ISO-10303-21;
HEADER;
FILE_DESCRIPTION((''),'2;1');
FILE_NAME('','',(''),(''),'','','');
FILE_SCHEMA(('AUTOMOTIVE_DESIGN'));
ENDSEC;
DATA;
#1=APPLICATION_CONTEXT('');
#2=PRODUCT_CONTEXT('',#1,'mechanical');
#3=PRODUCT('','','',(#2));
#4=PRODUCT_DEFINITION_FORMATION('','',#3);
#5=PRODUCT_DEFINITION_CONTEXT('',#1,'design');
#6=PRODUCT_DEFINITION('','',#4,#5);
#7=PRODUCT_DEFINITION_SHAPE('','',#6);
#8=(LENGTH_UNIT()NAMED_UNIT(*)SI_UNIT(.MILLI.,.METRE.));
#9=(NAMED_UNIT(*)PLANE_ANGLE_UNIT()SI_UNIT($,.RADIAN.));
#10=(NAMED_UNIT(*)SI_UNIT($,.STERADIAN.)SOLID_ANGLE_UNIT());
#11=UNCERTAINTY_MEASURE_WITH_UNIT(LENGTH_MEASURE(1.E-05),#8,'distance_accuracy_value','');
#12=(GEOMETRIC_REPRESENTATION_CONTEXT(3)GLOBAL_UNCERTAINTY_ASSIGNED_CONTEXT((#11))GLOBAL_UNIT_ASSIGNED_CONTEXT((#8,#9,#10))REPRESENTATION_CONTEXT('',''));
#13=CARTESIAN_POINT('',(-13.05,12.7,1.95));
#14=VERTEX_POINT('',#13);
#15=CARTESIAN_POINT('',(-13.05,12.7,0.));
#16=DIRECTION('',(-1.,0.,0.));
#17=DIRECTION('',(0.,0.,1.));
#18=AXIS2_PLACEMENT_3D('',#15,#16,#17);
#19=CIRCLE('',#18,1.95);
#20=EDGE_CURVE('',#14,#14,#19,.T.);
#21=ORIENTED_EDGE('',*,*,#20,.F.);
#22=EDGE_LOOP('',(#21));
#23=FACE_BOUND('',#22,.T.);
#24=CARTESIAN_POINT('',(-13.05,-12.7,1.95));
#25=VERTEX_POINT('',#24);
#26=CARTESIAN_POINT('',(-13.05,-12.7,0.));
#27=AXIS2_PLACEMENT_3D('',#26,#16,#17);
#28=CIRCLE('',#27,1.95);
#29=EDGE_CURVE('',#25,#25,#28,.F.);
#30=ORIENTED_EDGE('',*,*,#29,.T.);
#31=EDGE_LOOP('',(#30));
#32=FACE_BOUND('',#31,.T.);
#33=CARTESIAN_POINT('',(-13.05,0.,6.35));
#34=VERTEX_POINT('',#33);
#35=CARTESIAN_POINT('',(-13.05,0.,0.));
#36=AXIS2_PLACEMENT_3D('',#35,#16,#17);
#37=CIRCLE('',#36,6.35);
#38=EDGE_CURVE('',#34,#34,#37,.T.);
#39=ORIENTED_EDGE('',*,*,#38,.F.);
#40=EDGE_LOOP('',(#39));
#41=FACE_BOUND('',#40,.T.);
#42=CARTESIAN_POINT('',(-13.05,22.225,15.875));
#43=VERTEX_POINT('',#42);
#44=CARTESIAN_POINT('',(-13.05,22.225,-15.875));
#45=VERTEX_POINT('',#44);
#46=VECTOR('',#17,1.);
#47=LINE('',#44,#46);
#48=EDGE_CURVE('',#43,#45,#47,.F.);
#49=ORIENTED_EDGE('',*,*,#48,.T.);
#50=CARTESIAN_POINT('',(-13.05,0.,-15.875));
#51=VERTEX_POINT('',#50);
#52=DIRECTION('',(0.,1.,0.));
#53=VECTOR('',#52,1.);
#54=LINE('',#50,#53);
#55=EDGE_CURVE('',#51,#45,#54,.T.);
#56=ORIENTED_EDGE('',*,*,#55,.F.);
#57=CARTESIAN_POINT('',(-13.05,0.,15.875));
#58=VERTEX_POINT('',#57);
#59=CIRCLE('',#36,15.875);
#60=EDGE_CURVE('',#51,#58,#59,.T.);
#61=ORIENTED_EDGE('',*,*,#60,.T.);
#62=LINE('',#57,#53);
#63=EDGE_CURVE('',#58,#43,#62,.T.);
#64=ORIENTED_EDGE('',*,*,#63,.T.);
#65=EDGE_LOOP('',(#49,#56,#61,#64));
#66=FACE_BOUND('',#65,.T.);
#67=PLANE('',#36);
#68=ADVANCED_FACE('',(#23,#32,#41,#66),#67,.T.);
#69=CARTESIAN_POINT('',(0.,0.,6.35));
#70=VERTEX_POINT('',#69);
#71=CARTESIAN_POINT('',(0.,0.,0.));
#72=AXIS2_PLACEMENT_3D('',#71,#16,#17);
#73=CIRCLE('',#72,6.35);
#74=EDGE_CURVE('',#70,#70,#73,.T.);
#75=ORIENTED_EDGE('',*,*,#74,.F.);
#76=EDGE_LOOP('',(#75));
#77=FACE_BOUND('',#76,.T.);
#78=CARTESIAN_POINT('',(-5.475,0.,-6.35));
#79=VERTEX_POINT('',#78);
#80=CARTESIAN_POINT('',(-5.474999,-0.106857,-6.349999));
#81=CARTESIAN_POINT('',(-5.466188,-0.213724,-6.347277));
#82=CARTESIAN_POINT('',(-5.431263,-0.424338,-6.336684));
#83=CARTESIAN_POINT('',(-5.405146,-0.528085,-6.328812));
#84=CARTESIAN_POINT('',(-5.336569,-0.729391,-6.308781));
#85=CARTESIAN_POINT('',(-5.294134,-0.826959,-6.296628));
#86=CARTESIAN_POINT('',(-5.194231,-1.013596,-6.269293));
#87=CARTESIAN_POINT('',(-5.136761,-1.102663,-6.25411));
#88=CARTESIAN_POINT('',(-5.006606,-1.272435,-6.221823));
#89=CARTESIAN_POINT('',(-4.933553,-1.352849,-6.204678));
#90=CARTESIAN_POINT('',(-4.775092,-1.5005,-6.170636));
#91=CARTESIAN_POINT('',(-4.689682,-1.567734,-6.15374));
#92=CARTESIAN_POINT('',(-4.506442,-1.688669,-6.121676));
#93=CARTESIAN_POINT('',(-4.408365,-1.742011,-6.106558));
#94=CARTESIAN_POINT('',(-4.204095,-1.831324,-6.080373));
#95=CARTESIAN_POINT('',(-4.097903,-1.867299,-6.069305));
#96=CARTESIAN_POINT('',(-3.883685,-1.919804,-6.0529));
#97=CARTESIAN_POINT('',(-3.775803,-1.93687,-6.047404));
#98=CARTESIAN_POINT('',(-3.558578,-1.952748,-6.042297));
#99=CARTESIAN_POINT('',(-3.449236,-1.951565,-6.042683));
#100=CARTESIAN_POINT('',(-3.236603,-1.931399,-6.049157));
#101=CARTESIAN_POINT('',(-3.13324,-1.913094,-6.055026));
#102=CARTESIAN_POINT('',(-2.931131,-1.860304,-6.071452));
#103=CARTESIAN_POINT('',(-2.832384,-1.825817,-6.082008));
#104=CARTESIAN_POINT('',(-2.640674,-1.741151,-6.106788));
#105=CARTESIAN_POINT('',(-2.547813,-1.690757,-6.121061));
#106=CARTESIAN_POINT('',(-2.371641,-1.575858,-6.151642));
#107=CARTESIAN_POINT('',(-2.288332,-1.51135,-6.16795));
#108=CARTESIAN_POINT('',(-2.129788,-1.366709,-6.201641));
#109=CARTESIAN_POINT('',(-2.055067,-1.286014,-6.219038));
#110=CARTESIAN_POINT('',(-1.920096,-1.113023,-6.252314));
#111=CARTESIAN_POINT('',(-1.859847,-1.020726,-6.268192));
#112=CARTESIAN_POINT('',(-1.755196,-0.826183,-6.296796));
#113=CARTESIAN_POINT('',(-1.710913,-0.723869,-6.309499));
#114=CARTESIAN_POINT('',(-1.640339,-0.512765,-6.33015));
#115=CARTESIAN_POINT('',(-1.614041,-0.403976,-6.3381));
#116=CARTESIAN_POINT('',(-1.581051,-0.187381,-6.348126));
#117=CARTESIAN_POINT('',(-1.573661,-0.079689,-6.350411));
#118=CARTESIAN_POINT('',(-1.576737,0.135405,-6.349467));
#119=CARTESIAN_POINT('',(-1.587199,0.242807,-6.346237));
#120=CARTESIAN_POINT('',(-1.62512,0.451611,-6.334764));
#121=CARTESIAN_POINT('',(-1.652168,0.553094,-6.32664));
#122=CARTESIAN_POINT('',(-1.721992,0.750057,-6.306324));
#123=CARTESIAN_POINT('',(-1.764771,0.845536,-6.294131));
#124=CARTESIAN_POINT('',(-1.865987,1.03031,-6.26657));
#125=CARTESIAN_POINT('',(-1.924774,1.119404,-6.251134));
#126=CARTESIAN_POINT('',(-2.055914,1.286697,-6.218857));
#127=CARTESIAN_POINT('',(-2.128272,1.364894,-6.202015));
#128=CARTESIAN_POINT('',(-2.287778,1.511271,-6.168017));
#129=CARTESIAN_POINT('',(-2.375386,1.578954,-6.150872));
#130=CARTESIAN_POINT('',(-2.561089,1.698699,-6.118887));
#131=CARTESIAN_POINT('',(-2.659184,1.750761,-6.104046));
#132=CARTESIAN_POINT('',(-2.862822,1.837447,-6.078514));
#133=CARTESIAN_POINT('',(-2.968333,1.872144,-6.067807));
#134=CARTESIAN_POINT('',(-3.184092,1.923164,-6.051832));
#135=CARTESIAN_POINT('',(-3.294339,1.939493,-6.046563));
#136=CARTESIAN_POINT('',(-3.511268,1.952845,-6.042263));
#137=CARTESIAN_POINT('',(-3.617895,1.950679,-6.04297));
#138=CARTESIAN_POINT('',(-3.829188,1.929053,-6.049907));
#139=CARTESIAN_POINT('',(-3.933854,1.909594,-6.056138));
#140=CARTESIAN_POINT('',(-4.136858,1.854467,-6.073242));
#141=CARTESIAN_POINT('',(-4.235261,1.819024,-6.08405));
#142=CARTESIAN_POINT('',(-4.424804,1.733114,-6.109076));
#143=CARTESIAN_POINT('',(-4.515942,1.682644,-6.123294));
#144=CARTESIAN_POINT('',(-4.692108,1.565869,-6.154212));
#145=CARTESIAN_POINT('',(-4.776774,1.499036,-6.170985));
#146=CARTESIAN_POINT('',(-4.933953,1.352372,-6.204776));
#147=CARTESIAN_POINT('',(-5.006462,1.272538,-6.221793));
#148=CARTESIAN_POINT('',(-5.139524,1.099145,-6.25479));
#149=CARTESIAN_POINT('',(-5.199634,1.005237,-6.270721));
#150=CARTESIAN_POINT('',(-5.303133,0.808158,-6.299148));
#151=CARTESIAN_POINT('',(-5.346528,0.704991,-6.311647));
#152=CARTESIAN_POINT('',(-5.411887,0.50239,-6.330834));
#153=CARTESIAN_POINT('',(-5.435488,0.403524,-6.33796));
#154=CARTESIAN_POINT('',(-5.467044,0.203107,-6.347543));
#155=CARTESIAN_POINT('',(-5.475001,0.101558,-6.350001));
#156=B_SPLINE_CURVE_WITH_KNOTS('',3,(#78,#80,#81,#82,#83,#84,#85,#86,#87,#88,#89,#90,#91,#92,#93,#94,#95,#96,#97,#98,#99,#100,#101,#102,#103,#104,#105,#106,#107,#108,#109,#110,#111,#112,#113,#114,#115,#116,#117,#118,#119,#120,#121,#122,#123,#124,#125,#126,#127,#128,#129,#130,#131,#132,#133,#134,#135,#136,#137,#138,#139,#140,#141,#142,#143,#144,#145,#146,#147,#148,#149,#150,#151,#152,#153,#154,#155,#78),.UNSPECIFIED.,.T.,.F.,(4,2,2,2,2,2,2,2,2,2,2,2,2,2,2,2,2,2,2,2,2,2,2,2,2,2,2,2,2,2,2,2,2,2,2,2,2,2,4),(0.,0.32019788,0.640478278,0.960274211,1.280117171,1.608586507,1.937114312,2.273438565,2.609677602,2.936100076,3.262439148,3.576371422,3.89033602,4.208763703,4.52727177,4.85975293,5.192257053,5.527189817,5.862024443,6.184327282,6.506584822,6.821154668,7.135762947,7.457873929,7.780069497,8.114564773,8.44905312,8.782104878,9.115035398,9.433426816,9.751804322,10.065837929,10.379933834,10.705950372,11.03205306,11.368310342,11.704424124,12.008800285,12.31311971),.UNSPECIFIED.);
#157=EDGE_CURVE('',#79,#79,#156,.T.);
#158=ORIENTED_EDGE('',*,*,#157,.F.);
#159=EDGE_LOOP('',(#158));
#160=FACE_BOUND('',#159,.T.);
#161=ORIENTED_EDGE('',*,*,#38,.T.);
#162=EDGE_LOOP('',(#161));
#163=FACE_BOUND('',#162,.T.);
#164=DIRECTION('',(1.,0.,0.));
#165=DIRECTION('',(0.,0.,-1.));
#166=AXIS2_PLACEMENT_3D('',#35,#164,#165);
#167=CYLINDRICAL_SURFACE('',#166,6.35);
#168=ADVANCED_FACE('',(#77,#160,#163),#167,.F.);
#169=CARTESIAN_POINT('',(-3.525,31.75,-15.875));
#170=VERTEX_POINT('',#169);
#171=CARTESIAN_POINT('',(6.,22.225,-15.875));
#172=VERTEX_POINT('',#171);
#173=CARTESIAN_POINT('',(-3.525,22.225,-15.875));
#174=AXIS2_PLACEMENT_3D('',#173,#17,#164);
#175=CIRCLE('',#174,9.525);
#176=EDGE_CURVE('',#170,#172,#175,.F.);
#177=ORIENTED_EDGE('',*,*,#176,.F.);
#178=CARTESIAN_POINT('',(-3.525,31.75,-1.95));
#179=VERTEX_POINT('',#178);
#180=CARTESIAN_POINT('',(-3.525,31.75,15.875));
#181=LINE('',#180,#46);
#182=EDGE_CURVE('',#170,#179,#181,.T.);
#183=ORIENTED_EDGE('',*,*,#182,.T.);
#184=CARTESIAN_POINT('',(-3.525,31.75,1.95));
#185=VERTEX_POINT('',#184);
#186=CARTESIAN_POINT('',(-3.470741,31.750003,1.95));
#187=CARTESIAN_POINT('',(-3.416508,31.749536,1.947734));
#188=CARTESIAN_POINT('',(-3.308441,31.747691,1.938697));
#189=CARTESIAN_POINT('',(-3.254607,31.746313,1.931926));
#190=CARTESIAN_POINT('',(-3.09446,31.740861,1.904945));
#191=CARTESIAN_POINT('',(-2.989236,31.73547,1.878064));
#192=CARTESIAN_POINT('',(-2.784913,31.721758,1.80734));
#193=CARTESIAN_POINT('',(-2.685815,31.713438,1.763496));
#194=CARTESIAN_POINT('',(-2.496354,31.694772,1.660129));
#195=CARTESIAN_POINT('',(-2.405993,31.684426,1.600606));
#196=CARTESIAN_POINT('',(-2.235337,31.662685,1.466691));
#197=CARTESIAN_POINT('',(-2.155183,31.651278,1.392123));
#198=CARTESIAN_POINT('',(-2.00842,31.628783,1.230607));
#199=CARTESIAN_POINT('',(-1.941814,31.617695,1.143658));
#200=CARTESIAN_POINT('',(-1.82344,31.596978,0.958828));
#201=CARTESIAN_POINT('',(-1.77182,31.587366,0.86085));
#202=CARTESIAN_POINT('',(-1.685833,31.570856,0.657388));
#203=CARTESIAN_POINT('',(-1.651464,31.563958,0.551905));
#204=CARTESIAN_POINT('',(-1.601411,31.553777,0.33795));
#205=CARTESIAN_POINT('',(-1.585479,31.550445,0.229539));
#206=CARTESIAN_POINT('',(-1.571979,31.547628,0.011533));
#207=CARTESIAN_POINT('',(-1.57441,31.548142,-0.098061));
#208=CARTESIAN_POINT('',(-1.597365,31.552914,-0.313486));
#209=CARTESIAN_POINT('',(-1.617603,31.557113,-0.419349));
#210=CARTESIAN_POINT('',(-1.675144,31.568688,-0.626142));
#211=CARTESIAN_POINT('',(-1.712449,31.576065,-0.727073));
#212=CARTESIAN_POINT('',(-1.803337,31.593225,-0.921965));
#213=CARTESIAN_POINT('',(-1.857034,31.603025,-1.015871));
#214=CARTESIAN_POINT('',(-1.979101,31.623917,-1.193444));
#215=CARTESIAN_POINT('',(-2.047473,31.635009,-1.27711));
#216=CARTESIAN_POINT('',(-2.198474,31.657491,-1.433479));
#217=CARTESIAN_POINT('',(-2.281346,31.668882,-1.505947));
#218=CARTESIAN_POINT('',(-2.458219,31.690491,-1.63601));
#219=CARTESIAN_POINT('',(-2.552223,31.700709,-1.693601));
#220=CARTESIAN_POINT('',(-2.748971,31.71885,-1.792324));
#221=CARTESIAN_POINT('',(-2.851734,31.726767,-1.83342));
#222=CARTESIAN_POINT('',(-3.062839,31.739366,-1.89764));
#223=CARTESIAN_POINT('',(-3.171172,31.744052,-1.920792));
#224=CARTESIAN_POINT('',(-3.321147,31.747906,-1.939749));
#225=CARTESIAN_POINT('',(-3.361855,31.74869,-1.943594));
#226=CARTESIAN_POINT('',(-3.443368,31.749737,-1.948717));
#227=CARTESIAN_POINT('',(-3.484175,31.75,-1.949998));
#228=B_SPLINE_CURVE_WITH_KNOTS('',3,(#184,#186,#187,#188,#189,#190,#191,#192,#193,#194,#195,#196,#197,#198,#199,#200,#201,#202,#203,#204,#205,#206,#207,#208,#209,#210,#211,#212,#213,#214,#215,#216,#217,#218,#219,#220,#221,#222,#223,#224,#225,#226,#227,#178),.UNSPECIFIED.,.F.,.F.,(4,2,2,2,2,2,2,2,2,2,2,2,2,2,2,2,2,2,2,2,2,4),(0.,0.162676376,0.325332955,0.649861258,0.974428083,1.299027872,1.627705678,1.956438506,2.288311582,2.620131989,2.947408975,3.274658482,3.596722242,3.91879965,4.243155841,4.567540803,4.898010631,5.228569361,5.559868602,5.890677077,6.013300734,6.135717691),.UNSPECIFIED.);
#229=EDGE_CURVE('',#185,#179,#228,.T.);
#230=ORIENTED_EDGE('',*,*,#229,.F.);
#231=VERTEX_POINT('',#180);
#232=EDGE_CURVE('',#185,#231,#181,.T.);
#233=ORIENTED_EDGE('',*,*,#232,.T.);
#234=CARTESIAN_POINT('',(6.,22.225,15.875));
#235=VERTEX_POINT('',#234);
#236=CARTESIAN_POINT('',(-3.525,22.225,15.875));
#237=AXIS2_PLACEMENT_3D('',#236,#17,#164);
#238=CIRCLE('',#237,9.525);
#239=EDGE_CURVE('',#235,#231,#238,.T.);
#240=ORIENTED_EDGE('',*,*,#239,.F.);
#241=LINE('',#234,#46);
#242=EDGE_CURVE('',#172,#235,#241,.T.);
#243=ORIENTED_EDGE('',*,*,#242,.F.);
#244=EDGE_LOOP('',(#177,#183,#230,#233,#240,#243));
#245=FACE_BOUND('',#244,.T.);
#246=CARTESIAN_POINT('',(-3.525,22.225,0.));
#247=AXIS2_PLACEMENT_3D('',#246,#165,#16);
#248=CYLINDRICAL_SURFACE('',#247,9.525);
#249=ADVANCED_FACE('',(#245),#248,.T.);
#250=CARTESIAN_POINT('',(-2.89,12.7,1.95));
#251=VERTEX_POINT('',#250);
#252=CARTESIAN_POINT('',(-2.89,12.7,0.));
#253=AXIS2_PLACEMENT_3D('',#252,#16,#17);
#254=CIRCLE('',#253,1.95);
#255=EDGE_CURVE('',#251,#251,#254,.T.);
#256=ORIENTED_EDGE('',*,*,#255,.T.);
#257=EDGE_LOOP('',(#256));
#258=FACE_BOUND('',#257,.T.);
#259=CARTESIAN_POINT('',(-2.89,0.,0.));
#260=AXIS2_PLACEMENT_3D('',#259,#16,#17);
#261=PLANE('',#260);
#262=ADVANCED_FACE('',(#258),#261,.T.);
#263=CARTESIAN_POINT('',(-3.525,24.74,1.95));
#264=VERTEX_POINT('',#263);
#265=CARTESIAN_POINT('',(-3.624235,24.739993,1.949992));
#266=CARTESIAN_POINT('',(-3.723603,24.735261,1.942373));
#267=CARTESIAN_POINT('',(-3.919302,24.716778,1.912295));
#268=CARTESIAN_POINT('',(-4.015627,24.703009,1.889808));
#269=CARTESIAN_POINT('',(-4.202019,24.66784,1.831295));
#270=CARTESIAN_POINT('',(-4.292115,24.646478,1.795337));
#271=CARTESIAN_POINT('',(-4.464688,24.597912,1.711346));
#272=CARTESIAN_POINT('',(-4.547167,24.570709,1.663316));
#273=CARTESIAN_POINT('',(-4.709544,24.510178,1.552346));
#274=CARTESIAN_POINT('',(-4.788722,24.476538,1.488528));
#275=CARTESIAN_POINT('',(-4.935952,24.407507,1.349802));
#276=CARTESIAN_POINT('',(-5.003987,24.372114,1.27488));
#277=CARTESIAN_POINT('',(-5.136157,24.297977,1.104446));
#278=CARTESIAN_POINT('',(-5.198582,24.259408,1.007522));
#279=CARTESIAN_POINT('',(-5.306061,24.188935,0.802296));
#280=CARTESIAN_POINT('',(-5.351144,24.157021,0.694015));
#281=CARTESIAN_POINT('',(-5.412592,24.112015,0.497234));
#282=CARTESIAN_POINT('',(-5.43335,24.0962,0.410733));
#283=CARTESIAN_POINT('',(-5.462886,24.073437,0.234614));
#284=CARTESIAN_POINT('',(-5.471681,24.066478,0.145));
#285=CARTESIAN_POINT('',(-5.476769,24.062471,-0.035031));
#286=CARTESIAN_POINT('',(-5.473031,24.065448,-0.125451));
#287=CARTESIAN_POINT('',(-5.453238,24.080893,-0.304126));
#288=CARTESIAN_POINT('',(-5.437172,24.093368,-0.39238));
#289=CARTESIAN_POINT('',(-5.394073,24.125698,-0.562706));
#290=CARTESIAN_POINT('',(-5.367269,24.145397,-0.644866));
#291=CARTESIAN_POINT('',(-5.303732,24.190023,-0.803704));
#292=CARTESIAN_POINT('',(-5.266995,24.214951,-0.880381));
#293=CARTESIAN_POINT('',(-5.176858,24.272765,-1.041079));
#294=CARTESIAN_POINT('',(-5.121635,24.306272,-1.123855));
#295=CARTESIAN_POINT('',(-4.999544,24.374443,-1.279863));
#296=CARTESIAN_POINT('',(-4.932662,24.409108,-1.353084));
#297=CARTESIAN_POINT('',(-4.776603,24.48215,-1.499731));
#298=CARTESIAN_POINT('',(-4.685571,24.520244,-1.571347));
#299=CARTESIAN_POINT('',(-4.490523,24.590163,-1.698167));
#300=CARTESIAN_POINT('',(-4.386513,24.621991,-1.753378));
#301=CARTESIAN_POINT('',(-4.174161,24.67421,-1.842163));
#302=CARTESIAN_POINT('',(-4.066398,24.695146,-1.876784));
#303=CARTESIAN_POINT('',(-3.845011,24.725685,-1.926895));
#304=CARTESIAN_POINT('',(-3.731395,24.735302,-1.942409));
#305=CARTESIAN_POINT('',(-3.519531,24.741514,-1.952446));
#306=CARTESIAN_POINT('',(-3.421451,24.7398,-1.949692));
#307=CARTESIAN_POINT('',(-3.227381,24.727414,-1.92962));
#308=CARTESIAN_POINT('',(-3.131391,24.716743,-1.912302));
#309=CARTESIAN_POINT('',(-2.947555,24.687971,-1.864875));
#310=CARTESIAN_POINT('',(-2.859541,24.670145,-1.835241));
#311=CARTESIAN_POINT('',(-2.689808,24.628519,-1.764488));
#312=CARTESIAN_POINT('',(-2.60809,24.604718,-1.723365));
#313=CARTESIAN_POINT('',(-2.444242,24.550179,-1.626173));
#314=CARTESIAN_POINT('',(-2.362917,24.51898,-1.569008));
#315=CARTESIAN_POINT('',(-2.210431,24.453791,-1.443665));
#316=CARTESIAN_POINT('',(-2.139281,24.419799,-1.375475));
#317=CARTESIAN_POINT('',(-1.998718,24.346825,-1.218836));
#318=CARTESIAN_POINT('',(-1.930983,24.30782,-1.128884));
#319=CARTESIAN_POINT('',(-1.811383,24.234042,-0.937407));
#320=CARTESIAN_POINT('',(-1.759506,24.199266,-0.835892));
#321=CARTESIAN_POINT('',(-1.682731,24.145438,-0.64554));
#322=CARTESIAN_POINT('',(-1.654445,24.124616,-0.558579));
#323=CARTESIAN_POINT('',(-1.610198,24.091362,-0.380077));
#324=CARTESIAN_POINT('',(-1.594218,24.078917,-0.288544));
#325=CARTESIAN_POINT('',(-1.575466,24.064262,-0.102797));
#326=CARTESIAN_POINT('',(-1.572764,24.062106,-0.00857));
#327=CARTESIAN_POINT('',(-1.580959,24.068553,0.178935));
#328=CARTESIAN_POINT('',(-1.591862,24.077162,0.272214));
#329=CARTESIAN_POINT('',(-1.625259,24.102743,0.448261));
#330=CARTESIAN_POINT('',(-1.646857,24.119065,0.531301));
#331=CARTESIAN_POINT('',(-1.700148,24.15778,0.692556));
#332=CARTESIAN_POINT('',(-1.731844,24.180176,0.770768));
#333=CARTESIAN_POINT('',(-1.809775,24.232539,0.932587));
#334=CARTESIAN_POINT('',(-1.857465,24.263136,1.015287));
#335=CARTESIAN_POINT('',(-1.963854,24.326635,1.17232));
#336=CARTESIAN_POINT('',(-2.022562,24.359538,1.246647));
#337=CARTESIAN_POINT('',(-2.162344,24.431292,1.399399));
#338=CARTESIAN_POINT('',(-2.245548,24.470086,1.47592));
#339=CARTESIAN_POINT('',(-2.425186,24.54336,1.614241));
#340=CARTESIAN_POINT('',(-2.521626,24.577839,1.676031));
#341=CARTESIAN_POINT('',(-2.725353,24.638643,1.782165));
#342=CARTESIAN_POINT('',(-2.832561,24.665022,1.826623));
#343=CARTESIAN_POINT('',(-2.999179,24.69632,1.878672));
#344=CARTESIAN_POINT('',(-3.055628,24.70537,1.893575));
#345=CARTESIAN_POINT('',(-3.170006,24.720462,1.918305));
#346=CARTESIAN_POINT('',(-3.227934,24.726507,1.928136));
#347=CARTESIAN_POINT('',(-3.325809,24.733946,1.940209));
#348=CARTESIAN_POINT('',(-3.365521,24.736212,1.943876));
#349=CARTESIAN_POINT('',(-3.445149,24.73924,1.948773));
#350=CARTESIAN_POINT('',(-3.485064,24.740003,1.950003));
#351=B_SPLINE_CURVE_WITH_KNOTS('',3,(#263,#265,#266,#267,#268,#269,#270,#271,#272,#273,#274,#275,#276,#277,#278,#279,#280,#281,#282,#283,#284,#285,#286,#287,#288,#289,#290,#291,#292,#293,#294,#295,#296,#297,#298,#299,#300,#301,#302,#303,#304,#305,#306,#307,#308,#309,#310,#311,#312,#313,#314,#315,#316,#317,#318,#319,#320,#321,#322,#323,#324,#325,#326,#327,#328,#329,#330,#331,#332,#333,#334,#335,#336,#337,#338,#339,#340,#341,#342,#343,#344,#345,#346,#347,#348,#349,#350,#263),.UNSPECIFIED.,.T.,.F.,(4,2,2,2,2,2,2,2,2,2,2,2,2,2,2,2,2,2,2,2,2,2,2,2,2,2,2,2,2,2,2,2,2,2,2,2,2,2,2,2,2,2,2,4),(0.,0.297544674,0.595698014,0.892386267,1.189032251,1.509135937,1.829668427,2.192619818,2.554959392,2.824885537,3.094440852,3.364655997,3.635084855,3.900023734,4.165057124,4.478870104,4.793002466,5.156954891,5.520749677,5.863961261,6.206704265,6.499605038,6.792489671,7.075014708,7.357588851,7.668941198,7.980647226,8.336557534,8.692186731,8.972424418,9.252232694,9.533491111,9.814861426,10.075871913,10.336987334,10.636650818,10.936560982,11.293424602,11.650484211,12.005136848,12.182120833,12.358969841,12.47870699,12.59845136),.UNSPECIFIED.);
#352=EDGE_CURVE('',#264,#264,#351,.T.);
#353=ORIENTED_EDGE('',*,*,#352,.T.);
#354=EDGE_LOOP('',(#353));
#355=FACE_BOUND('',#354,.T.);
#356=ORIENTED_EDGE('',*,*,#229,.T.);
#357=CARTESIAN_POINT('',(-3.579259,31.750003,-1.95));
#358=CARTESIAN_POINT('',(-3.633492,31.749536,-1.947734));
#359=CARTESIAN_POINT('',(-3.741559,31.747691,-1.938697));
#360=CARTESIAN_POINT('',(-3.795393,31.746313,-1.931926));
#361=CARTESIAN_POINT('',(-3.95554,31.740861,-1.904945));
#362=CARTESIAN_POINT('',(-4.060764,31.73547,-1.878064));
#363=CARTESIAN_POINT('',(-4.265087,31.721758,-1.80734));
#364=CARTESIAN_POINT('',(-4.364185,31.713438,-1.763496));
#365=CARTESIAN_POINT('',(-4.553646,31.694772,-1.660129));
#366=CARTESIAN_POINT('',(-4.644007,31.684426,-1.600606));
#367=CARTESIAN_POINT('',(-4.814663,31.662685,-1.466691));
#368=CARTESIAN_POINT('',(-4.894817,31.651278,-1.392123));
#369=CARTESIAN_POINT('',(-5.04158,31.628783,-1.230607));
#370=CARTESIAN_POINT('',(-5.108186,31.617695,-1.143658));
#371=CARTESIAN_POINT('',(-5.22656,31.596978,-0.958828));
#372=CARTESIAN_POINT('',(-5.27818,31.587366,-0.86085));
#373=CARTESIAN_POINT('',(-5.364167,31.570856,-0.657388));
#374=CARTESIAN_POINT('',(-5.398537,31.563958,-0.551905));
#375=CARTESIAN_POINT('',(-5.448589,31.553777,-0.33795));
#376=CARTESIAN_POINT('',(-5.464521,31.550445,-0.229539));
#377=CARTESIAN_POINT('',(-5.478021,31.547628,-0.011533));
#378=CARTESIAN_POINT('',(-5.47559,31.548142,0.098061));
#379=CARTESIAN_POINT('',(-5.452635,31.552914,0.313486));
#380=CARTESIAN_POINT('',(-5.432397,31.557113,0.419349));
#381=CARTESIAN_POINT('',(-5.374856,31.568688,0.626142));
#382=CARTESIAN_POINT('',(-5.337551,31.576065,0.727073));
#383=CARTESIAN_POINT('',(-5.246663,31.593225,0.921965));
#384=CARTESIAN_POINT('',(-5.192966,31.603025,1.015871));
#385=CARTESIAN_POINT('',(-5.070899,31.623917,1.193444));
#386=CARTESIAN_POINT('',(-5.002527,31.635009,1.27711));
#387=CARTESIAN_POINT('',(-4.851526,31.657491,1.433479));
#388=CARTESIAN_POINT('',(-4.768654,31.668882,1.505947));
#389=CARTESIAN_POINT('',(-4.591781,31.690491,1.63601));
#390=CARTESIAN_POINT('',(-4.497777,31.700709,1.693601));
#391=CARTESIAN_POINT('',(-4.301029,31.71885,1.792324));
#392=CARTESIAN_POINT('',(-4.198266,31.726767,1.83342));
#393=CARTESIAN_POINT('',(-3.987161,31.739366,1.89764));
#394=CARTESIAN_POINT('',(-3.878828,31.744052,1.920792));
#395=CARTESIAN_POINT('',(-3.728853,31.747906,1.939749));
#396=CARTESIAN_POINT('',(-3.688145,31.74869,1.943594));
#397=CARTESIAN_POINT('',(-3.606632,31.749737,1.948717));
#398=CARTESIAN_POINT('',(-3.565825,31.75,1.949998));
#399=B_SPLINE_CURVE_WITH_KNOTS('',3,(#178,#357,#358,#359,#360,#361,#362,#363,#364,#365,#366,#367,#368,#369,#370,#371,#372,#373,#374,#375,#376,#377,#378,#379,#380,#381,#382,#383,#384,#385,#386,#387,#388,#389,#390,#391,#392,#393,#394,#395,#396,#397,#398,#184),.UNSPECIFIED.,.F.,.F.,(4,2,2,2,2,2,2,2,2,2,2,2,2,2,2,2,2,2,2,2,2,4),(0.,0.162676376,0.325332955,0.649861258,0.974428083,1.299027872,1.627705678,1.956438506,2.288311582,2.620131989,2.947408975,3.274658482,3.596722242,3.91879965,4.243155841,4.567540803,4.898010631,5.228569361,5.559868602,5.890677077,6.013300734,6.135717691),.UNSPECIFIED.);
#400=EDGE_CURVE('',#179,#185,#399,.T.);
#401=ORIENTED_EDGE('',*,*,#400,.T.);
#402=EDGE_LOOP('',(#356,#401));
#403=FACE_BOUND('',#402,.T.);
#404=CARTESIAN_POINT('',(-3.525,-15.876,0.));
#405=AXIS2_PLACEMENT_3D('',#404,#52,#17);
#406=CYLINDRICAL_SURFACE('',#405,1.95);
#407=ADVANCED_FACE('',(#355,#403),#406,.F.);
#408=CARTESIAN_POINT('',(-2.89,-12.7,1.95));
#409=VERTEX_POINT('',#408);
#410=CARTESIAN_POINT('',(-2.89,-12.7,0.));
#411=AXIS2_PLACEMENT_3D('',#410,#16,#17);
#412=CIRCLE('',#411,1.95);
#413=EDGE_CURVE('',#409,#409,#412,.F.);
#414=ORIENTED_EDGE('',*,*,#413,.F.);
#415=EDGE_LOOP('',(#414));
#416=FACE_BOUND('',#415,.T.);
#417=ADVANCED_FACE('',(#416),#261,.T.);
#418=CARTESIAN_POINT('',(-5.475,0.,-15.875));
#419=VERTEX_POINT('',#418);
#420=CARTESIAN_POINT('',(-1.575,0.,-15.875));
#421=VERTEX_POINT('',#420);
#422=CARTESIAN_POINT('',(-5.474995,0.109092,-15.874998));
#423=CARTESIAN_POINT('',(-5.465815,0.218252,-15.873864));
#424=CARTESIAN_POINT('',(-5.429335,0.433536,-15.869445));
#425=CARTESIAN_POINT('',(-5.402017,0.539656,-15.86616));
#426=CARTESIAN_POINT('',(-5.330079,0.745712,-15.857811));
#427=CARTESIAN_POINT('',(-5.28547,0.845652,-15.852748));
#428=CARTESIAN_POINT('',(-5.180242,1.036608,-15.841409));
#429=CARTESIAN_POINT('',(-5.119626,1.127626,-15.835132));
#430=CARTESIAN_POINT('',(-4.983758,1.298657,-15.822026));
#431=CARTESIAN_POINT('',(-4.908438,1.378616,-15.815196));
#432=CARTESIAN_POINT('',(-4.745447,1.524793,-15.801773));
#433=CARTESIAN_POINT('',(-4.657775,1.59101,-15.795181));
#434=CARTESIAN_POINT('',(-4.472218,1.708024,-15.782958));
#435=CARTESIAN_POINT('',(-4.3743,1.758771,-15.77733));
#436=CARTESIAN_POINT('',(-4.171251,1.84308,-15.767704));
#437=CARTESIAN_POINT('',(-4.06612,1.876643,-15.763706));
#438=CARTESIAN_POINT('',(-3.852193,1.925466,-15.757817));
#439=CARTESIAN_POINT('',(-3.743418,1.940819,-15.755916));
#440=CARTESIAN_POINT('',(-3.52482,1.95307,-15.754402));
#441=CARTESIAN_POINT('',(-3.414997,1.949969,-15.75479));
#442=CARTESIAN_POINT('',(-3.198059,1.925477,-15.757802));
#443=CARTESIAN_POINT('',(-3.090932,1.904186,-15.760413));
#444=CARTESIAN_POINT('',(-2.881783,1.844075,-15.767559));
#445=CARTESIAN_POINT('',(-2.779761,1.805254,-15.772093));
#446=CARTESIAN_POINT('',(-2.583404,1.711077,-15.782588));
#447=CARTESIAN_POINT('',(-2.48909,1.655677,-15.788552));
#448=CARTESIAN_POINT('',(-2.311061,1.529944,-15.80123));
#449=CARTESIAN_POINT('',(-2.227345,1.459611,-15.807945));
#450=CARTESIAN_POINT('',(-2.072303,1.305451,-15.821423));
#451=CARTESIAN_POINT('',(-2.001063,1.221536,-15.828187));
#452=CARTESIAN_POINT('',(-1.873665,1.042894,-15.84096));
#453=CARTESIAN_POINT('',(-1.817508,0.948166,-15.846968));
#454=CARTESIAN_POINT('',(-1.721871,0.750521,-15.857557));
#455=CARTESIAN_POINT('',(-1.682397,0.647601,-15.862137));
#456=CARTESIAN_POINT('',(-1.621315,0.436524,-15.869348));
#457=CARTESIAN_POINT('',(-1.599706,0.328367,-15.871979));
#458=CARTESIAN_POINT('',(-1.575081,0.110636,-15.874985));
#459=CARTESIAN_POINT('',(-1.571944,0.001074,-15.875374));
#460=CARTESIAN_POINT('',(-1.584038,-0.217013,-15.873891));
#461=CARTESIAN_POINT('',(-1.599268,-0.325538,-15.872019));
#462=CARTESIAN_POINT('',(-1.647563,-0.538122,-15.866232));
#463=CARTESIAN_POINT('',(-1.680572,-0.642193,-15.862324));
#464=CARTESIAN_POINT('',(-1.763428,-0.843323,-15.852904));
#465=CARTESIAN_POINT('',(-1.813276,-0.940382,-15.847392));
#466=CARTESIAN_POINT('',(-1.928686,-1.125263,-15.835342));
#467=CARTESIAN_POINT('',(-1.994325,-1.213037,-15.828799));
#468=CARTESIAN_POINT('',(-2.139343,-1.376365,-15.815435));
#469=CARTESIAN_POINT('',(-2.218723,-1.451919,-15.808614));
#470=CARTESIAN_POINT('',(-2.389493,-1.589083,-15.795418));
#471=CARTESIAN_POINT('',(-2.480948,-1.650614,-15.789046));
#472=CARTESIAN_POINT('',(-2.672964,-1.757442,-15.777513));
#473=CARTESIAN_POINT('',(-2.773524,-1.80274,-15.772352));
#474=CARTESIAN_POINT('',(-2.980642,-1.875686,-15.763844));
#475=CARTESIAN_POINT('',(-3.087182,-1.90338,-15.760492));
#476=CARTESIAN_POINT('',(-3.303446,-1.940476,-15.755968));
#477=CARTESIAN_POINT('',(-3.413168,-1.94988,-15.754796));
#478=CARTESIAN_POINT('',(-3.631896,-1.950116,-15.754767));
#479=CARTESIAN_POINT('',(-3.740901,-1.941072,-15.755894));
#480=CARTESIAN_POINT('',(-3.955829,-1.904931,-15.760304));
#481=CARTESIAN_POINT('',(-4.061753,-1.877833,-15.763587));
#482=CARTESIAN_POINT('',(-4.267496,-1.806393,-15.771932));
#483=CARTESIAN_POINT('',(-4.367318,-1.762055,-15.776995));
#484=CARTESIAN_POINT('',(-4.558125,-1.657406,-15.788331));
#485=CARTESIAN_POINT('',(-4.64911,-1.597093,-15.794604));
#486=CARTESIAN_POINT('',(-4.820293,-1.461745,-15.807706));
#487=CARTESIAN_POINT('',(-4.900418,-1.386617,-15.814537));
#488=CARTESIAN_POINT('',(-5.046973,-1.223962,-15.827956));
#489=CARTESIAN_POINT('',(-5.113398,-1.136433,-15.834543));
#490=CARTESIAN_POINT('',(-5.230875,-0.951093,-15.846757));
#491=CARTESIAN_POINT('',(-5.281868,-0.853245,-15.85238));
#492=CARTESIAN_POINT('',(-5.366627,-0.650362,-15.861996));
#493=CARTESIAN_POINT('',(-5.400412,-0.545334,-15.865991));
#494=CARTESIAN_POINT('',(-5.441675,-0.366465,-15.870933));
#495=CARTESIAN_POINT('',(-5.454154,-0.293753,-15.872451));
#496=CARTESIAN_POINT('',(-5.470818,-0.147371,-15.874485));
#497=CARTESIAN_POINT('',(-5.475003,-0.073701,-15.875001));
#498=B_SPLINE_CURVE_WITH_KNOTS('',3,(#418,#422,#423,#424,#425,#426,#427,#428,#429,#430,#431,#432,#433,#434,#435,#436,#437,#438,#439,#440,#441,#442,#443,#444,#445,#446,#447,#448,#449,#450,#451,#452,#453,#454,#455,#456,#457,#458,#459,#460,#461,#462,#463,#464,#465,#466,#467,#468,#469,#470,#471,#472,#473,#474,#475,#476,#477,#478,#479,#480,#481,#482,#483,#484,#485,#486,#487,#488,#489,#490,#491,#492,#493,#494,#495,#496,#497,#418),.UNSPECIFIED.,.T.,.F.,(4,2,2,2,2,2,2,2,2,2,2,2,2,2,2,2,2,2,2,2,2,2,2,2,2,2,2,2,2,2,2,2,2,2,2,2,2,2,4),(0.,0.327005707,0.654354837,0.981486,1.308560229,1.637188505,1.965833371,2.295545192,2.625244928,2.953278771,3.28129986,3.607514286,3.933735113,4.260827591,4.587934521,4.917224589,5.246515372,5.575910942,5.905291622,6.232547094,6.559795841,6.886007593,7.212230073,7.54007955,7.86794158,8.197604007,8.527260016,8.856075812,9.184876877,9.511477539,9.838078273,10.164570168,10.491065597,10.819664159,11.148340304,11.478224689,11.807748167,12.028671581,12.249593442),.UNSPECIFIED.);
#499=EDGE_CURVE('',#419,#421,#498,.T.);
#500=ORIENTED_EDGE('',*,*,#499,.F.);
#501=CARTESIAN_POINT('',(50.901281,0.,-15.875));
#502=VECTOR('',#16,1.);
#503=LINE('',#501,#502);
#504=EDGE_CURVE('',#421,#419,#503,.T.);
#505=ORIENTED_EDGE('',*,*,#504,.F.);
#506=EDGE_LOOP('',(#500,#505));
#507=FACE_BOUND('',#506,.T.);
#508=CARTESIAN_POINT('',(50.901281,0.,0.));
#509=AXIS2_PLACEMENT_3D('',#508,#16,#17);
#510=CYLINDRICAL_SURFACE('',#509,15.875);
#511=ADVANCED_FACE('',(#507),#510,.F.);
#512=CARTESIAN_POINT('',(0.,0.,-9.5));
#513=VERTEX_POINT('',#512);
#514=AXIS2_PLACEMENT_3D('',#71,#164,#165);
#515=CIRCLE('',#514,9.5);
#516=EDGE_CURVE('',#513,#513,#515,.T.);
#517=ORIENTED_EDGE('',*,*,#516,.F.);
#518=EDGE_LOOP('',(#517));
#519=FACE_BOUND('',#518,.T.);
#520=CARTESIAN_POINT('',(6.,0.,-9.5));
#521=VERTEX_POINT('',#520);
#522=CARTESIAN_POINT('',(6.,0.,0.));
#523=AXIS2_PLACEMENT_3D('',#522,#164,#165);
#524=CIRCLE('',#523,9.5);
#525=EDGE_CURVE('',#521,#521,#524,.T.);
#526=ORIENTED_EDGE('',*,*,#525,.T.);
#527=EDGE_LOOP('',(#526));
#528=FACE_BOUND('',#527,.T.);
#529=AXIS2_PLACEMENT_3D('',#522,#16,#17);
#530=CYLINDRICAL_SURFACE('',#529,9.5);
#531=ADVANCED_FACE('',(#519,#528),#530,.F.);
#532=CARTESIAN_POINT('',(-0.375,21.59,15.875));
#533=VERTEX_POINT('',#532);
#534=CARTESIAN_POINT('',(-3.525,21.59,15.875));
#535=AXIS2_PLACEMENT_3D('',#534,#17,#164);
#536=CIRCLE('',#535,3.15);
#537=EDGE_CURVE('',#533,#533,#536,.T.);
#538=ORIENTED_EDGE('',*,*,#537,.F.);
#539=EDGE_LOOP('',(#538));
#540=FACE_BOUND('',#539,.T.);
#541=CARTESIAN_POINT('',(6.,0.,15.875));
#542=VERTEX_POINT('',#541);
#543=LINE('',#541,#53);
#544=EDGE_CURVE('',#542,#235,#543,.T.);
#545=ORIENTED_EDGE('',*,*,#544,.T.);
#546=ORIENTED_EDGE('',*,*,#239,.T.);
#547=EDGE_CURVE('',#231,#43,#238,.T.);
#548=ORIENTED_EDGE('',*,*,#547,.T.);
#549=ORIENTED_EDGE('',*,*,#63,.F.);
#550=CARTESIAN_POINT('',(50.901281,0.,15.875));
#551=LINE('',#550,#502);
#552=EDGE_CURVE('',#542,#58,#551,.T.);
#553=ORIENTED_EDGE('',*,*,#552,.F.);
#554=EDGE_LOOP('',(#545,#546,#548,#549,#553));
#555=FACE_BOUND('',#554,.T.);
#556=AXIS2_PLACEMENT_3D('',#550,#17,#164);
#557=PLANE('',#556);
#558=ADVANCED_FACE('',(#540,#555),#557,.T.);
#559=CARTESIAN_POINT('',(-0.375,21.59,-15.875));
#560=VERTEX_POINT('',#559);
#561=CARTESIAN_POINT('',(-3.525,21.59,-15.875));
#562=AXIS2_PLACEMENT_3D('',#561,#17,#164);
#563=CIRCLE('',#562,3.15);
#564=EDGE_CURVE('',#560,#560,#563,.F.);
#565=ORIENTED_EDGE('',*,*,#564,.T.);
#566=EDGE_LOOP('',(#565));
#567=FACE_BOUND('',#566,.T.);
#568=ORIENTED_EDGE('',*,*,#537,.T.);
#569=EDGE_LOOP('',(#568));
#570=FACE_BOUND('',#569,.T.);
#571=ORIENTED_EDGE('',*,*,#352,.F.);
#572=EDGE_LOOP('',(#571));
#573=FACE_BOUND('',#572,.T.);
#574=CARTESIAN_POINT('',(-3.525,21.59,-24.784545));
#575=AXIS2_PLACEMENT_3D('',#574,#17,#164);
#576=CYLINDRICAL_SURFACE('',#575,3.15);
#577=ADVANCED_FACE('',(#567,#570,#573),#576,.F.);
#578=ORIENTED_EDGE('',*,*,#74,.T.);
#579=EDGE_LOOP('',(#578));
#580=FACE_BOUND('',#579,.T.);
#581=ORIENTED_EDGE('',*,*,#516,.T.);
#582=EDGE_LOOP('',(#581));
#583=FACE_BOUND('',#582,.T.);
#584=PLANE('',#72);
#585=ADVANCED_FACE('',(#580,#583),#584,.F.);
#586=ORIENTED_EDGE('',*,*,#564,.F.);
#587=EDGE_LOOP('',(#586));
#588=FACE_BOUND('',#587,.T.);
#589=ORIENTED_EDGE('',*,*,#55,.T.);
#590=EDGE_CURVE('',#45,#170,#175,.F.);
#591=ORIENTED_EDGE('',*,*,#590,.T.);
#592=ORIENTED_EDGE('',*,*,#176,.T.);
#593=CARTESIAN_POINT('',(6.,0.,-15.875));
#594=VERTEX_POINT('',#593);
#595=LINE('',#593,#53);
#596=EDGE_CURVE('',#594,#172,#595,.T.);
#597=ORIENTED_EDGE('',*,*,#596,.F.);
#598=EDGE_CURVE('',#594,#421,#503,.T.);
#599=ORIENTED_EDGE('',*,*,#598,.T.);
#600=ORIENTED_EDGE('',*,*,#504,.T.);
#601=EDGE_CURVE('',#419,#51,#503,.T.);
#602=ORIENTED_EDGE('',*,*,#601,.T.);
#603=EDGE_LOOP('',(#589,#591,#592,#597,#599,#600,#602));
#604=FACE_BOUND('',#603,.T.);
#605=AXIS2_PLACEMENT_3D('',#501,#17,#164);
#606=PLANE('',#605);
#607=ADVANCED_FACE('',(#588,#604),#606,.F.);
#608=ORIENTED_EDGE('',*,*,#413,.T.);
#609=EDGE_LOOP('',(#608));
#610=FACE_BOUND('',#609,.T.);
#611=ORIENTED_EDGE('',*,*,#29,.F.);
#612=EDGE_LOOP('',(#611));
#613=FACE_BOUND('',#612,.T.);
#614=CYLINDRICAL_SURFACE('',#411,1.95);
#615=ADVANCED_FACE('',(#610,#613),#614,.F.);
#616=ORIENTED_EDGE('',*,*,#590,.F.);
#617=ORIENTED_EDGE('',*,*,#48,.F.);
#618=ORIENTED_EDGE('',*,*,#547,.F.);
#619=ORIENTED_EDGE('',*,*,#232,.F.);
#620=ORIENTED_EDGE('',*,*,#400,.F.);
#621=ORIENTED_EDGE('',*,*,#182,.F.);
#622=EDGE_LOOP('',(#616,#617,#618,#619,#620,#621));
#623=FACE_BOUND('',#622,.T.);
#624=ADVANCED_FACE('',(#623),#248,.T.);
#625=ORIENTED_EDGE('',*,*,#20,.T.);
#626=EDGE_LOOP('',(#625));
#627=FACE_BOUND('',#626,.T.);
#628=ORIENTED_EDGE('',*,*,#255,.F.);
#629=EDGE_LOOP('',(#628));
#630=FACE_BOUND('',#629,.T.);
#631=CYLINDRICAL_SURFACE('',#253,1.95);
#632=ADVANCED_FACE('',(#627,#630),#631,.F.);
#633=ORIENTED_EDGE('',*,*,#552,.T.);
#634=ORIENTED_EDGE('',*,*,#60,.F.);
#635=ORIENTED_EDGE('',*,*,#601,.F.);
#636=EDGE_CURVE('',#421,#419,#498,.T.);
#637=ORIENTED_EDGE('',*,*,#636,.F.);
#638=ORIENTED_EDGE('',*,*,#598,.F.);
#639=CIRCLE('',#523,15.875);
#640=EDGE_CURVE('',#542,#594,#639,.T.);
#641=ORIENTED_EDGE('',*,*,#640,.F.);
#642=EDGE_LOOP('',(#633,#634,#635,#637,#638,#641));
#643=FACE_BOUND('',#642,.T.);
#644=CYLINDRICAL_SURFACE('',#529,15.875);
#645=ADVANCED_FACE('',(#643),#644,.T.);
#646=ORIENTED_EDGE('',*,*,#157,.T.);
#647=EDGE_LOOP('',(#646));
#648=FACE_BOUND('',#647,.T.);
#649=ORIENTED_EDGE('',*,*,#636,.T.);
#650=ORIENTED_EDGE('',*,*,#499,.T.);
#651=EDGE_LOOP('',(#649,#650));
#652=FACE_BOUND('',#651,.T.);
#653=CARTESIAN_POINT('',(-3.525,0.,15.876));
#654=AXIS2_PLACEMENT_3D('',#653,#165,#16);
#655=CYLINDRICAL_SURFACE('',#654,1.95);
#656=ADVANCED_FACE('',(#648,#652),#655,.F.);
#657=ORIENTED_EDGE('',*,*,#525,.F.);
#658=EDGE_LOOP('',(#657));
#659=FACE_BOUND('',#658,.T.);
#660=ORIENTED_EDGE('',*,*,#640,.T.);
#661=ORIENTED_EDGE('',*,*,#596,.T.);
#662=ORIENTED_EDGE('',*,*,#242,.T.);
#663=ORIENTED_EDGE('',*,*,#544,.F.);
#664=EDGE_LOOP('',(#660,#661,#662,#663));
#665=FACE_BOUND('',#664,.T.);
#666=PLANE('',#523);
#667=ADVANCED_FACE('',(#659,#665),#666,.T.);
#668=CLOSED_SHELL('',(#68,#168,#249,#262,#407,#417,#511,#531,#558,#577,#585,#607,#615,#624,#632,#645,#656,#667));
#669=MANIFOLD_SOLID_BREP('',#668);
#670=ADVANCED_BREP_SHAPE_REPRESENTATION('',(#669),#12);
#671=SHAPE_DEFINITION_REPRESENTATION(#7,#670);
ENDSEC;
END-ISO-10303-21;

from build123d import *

# Parameters (mm, degrees)
SKETCH1_R               = 15.875
SKETCH1_R_2             = 9.5
BOSS_EXTRUDE1_DEPTH     = 6
BOSS_EXTRUDE2_START     = 13.050000011
SKETCH2_R               = 15.875
SKETCH2_R_2             = 9.5
SKETCH2_R_3             = 6.35
BOSS_EXTRUDE2_DEPTH     = 13.050000011
SKETCH3_R               = 1.95
CUT_EXTRUDE1_DEPTH      = 10.16
CUT_EXTRUDE3_REACH      = 39.82
CUT_EXTRUDE3_END_RADIUS = 6.35
BOSS_EXTRUDE3_REACH     = 31.444
SKETCH7_R               = 3.15
CUT_EXTRUDE4_DEPTH      = 31.75
CUT_EXTRUDE5_REACH      = 53.87
CUT_EXTRUDE5_END_RADIUS = 3.15
SKETCH8_R               = 1.95
FILLET1_R               = 9.525


with BuildPart() as part:
    # Sketch1 → Boss-Extrude1 (new body)
    with BuildSketch(Plane(origin=(0, 0, 0), x_dir=(0, 0, -1), z_dir=(1, 0, 0))):
        Circle(SKETCH1_R)
        Circle(SKETCH1_R_2, mode=Mode.SUBTRACT)
    extrude(amount=BOSS_EXTRUDE1_DEPTH)

    # Sketch2 → Boss-Extrude2 (add)
    # profile 1 of 2: a face of its own
    with BuildSketch(Plane.ZY.offset(BOSS_EXTRUDE2_START)):
        Circle(SKETCH2_R)
        with Locations(Location((0, 0, 0), (0, 0, 180))):
            Circle(SKETCH2_R_2, mode=Mode.SUBTRACT)
    # profile 2 of 2: a face of its own
    with BuildSketch(Plane.ZY.offset(BOSS_EXTRUDE2_START)):
        with Locations(Location((0, 0, 0), (0, 0, 180))):
            Circle(SKETCH2_R_2)
        Circle(SKETCH2_R_3, mode=Mode.SUBTRACT)
    extrude(amount=-BOSS_EXTRUDE2_DEPTH)

    # Sketch3 → Cut-Extrude1 (cut)
    with BuildSketch(Plane.ZY.offset(13.050000011)):
        with Locations((0, -12.7)):
            Circle(SKETCH3_R)
        with Locations((0, 12.7)):
            Circle(SKETCH3_R)
    extrude(amount=-CUT_EXTRUDE1_DEPTH, mode=Mode.SUBTRACT)

    # Cut-Extrude3: up to this cylinder (the profile starts outside it)
    cut_extrude3_end = Plane(origin=(-3.525, 0, 0), z_dir=(1, 0, 0)) * Cylinder(CUT_EXTRUDE3_END_RADIUS, 93.34, mode=Mode.PRIVATE)
    # Sketch5 → Cut-Extrude3 (cut, up to the surface)
    with BuildSketch(Plane.XY.offset(-15.875), mode=Mode.PRIVATE) as cut_extrude3_sk1:
        with BuildLine():
            ThreePointArc((-1.575000006, 0), (-3.525000006, 1.95), (-5.475000006, 0))
            Line((-5.475000006, 0), (-1.575000006, 0))
        make_face()
    cut_extrude3_tool1 = extrude(cut_extrude3_sk1.sketch, amount=CUT_EXTRUDE3_REACH, mode=Mode.PRIVATE) - cut_extrude3_end
    add(cut_extrude3_tool1.solids().sort_by_distance((-3.525, 0.827606, -15.875))[0], mode=Mode.SUBTRACT)
    # Sketch5 → Cut-Extrude3 (cut, up to the surface)
    with BuildSketch(Plane.XY.offset(-15.875), mode=Mode.PRIVATE) as cut_extrude3_sk2:
        with BuildLine():
            Line((-1.575000006, 0), (-5.475000006, 0))
            ThreePointArc((-5.475000006, 0), (-3.525000006, -1.95), (-1.575000006, 0))
        make_face()
    cut_extrude3_tool2 = extrude(cut_extrude3_sk2.sketch, amount=CUT_EXTRUDE3_REACH, mode=Mode.PRIVATE) - cut_extrude3_end
    add(cut_extrude3_tool2.solids().sort_by_distance((-3.525, -0.827606, -15.875))[0], mode=Mode.SUBTRACT)
    # Sketch5 → Cut-Extrude3 (cut, up to the surface)
    with BuildSketch(Plane.XY.offset(-15.875), mode=Mode.PRIVATE) as cut_extrude3_sk3:
        with BuildLine():
            ThreePointArc((-1.575000006, 0), (-3.525000006, 1.95), (-5.475000006, 0))
            Line((-5.475000006, 0), (-1.575000006, 0))
        make_face()
    cut_extrude3_tool3 = extrude(cut_extrude3_sk3.sketch, amount=CUT_EXTRUDE3_REACH, mode=Mode.PRIVATE) - cut_extrude3_end
    add(cut_extrude3_tool3.solids().sort_by_distance((-3.525, 0.827606, -15.875))[0], mode=Mode.SUBTRACT)
    # Sketch5 → Cut-Extrude3 (cut, up to the surface)
    with BuildSketch(Plane.XY.offset(-15.875), mode=Mode.PRIVATE) as cut_extrude3_sk4:
        with BuildLine():
            Line((-1.575000006, 0), (-5.475000006, 0))
            ThreePointArc((-5.475000006, 0), (-3.525000006, -1.95), (-1.575000006, 0))
        make_face()
    cut_extrude3_tool4 = extrude(cut_extrude3_sk4.sketch, amount=CUT_EXTRUDE3_REACH, mode=Mode.PRIVATE) - cut_extrude3_end
    add(cut_extrude3_tool4.solids().sort_by_distance((-3.525, -0.827606, -15.875))[0], mode=Mode.SUBTRACT)

    # Boss-Extrude3: up to this face of the body (flat: up to its plane)
    boss_extrude3_end = Plane(part.part.faces().sort_by_distance((6, 0, 15.425987194))[0])
    # Sketch6 → Boss-Extrude3 (add, up to the picked face)
    with BuildSketch(Plane.ZY.offset(13.050000011), mode=Mode.PRIVATE) as boss_extrude3_sk1:
        with BuildLine():
            Line((-15.875, 31.75), (-15.875, 0))
            ThreePointArc((-15.875, 0), (0, 15.875), (15.875, 0))
            Line((15.875, 0), (15.875, 31.75))
            Line((15.875, 31.75), (-15.875, 31.75))
        make_face()
    boss_extrude3_tool1 = split(extrude(boss_extrude3_sk1.sketch, amount=-BOSS_EXTRUDE3_REACH, mode=Mode.PRIVATE), bisect_by=boss_extrude3_end, keep=Keep.BOTH, mode=Mode.PRIVATE)
    add(boss_extrude3_tool1.solids().sort_by(Axis((-13.05, 21.783545, 0), (1, 0, 0)))[0])

    # Sketch7 → Cut-Extrude4 (cut)
    with BuildSketch(Plane.XY.offset(15.875)):
        with Locations((-3.525000006, 21.59)):
            Circle(SKETCH7_R)
    extrude(amount=-CUT_EXTRUDE4_DEPTH, mode=Mode.SUBTRACT)

    # Cut-Extrude5: up to this cylinder (the profile starts outside it)
    cut_extrude5_end = Plane(origin=(-3.525000006, 21.59, 0), z_dir=(0, 0, 1)) * Cylinder(CUT_EXTRUDE5_END_RADIUS, 115.04, mode=Mode.PRIVATE)
    # Sketch8 → Cut-Extrude5 (cut, up to the surface)
    with BuildSketch(Plane(origin=(0, 31.75, 0), x_dir=(1, 0, 0), z_dir=(0, 1, 0)), mode=Mode.PRIVATE) as cut_extrude5_sk1:
        with Locations(Location((-3.525000006, 0, 0), (0, 0, 270))):
            Circle(SKETCH8_R)
    cut_extrude5_tool1 = extrude(cut_extrude5_sk1.sketch, amount=-CUT_EXTRUDE5_REACH, mode=Mode.PRIVATE) - cut_extrude5_end
    add(cut_extrude5_tool1.solids().sort_by_distance((-3.525, 31.75, 0))[0], mode=Mode.SUBTRACT)

    # Fillet1
    # the kernel refuses this fillet: 9.525 mm, written as the material it takes off along each edge
    with BuildSketch(Plane(origin=(6, 31.75, 39.6875), x_dir=(0, -1, 0), z_dir=(0, 0, -1))) as fillet1_piece_1:
        with BuildLine():
            CenterArc((FILLET1_R, FILLET1_R), FILLET1_R, 180, 90)
            Line((0, FILLET1_R), (0, 0))
            Line((0, 0), (FILLET1_R, 0))
        make_face()
    extrude(amount=79.375, mode=Mode.SUBTRACT)
    with BuildSketch(Plane(origin=(-13.050000011, 31.75, 39.6875), x_dir=(0, -1, 0), z_dir=(0, 0, -1))) as fillet1_piece_2:
        with BuildLine():
            CenterArc((FILLET1_R, -FILLET1_R), FILLET1_R, 90, 90)
            Line((0, -FILLET1_R), (0, 0))
            Line((0, 0), (FILLET1_R, 0))
        make_face()
    extrude(amount=79.375, mode=Mode.SUBTRACT)


solid = part.part
